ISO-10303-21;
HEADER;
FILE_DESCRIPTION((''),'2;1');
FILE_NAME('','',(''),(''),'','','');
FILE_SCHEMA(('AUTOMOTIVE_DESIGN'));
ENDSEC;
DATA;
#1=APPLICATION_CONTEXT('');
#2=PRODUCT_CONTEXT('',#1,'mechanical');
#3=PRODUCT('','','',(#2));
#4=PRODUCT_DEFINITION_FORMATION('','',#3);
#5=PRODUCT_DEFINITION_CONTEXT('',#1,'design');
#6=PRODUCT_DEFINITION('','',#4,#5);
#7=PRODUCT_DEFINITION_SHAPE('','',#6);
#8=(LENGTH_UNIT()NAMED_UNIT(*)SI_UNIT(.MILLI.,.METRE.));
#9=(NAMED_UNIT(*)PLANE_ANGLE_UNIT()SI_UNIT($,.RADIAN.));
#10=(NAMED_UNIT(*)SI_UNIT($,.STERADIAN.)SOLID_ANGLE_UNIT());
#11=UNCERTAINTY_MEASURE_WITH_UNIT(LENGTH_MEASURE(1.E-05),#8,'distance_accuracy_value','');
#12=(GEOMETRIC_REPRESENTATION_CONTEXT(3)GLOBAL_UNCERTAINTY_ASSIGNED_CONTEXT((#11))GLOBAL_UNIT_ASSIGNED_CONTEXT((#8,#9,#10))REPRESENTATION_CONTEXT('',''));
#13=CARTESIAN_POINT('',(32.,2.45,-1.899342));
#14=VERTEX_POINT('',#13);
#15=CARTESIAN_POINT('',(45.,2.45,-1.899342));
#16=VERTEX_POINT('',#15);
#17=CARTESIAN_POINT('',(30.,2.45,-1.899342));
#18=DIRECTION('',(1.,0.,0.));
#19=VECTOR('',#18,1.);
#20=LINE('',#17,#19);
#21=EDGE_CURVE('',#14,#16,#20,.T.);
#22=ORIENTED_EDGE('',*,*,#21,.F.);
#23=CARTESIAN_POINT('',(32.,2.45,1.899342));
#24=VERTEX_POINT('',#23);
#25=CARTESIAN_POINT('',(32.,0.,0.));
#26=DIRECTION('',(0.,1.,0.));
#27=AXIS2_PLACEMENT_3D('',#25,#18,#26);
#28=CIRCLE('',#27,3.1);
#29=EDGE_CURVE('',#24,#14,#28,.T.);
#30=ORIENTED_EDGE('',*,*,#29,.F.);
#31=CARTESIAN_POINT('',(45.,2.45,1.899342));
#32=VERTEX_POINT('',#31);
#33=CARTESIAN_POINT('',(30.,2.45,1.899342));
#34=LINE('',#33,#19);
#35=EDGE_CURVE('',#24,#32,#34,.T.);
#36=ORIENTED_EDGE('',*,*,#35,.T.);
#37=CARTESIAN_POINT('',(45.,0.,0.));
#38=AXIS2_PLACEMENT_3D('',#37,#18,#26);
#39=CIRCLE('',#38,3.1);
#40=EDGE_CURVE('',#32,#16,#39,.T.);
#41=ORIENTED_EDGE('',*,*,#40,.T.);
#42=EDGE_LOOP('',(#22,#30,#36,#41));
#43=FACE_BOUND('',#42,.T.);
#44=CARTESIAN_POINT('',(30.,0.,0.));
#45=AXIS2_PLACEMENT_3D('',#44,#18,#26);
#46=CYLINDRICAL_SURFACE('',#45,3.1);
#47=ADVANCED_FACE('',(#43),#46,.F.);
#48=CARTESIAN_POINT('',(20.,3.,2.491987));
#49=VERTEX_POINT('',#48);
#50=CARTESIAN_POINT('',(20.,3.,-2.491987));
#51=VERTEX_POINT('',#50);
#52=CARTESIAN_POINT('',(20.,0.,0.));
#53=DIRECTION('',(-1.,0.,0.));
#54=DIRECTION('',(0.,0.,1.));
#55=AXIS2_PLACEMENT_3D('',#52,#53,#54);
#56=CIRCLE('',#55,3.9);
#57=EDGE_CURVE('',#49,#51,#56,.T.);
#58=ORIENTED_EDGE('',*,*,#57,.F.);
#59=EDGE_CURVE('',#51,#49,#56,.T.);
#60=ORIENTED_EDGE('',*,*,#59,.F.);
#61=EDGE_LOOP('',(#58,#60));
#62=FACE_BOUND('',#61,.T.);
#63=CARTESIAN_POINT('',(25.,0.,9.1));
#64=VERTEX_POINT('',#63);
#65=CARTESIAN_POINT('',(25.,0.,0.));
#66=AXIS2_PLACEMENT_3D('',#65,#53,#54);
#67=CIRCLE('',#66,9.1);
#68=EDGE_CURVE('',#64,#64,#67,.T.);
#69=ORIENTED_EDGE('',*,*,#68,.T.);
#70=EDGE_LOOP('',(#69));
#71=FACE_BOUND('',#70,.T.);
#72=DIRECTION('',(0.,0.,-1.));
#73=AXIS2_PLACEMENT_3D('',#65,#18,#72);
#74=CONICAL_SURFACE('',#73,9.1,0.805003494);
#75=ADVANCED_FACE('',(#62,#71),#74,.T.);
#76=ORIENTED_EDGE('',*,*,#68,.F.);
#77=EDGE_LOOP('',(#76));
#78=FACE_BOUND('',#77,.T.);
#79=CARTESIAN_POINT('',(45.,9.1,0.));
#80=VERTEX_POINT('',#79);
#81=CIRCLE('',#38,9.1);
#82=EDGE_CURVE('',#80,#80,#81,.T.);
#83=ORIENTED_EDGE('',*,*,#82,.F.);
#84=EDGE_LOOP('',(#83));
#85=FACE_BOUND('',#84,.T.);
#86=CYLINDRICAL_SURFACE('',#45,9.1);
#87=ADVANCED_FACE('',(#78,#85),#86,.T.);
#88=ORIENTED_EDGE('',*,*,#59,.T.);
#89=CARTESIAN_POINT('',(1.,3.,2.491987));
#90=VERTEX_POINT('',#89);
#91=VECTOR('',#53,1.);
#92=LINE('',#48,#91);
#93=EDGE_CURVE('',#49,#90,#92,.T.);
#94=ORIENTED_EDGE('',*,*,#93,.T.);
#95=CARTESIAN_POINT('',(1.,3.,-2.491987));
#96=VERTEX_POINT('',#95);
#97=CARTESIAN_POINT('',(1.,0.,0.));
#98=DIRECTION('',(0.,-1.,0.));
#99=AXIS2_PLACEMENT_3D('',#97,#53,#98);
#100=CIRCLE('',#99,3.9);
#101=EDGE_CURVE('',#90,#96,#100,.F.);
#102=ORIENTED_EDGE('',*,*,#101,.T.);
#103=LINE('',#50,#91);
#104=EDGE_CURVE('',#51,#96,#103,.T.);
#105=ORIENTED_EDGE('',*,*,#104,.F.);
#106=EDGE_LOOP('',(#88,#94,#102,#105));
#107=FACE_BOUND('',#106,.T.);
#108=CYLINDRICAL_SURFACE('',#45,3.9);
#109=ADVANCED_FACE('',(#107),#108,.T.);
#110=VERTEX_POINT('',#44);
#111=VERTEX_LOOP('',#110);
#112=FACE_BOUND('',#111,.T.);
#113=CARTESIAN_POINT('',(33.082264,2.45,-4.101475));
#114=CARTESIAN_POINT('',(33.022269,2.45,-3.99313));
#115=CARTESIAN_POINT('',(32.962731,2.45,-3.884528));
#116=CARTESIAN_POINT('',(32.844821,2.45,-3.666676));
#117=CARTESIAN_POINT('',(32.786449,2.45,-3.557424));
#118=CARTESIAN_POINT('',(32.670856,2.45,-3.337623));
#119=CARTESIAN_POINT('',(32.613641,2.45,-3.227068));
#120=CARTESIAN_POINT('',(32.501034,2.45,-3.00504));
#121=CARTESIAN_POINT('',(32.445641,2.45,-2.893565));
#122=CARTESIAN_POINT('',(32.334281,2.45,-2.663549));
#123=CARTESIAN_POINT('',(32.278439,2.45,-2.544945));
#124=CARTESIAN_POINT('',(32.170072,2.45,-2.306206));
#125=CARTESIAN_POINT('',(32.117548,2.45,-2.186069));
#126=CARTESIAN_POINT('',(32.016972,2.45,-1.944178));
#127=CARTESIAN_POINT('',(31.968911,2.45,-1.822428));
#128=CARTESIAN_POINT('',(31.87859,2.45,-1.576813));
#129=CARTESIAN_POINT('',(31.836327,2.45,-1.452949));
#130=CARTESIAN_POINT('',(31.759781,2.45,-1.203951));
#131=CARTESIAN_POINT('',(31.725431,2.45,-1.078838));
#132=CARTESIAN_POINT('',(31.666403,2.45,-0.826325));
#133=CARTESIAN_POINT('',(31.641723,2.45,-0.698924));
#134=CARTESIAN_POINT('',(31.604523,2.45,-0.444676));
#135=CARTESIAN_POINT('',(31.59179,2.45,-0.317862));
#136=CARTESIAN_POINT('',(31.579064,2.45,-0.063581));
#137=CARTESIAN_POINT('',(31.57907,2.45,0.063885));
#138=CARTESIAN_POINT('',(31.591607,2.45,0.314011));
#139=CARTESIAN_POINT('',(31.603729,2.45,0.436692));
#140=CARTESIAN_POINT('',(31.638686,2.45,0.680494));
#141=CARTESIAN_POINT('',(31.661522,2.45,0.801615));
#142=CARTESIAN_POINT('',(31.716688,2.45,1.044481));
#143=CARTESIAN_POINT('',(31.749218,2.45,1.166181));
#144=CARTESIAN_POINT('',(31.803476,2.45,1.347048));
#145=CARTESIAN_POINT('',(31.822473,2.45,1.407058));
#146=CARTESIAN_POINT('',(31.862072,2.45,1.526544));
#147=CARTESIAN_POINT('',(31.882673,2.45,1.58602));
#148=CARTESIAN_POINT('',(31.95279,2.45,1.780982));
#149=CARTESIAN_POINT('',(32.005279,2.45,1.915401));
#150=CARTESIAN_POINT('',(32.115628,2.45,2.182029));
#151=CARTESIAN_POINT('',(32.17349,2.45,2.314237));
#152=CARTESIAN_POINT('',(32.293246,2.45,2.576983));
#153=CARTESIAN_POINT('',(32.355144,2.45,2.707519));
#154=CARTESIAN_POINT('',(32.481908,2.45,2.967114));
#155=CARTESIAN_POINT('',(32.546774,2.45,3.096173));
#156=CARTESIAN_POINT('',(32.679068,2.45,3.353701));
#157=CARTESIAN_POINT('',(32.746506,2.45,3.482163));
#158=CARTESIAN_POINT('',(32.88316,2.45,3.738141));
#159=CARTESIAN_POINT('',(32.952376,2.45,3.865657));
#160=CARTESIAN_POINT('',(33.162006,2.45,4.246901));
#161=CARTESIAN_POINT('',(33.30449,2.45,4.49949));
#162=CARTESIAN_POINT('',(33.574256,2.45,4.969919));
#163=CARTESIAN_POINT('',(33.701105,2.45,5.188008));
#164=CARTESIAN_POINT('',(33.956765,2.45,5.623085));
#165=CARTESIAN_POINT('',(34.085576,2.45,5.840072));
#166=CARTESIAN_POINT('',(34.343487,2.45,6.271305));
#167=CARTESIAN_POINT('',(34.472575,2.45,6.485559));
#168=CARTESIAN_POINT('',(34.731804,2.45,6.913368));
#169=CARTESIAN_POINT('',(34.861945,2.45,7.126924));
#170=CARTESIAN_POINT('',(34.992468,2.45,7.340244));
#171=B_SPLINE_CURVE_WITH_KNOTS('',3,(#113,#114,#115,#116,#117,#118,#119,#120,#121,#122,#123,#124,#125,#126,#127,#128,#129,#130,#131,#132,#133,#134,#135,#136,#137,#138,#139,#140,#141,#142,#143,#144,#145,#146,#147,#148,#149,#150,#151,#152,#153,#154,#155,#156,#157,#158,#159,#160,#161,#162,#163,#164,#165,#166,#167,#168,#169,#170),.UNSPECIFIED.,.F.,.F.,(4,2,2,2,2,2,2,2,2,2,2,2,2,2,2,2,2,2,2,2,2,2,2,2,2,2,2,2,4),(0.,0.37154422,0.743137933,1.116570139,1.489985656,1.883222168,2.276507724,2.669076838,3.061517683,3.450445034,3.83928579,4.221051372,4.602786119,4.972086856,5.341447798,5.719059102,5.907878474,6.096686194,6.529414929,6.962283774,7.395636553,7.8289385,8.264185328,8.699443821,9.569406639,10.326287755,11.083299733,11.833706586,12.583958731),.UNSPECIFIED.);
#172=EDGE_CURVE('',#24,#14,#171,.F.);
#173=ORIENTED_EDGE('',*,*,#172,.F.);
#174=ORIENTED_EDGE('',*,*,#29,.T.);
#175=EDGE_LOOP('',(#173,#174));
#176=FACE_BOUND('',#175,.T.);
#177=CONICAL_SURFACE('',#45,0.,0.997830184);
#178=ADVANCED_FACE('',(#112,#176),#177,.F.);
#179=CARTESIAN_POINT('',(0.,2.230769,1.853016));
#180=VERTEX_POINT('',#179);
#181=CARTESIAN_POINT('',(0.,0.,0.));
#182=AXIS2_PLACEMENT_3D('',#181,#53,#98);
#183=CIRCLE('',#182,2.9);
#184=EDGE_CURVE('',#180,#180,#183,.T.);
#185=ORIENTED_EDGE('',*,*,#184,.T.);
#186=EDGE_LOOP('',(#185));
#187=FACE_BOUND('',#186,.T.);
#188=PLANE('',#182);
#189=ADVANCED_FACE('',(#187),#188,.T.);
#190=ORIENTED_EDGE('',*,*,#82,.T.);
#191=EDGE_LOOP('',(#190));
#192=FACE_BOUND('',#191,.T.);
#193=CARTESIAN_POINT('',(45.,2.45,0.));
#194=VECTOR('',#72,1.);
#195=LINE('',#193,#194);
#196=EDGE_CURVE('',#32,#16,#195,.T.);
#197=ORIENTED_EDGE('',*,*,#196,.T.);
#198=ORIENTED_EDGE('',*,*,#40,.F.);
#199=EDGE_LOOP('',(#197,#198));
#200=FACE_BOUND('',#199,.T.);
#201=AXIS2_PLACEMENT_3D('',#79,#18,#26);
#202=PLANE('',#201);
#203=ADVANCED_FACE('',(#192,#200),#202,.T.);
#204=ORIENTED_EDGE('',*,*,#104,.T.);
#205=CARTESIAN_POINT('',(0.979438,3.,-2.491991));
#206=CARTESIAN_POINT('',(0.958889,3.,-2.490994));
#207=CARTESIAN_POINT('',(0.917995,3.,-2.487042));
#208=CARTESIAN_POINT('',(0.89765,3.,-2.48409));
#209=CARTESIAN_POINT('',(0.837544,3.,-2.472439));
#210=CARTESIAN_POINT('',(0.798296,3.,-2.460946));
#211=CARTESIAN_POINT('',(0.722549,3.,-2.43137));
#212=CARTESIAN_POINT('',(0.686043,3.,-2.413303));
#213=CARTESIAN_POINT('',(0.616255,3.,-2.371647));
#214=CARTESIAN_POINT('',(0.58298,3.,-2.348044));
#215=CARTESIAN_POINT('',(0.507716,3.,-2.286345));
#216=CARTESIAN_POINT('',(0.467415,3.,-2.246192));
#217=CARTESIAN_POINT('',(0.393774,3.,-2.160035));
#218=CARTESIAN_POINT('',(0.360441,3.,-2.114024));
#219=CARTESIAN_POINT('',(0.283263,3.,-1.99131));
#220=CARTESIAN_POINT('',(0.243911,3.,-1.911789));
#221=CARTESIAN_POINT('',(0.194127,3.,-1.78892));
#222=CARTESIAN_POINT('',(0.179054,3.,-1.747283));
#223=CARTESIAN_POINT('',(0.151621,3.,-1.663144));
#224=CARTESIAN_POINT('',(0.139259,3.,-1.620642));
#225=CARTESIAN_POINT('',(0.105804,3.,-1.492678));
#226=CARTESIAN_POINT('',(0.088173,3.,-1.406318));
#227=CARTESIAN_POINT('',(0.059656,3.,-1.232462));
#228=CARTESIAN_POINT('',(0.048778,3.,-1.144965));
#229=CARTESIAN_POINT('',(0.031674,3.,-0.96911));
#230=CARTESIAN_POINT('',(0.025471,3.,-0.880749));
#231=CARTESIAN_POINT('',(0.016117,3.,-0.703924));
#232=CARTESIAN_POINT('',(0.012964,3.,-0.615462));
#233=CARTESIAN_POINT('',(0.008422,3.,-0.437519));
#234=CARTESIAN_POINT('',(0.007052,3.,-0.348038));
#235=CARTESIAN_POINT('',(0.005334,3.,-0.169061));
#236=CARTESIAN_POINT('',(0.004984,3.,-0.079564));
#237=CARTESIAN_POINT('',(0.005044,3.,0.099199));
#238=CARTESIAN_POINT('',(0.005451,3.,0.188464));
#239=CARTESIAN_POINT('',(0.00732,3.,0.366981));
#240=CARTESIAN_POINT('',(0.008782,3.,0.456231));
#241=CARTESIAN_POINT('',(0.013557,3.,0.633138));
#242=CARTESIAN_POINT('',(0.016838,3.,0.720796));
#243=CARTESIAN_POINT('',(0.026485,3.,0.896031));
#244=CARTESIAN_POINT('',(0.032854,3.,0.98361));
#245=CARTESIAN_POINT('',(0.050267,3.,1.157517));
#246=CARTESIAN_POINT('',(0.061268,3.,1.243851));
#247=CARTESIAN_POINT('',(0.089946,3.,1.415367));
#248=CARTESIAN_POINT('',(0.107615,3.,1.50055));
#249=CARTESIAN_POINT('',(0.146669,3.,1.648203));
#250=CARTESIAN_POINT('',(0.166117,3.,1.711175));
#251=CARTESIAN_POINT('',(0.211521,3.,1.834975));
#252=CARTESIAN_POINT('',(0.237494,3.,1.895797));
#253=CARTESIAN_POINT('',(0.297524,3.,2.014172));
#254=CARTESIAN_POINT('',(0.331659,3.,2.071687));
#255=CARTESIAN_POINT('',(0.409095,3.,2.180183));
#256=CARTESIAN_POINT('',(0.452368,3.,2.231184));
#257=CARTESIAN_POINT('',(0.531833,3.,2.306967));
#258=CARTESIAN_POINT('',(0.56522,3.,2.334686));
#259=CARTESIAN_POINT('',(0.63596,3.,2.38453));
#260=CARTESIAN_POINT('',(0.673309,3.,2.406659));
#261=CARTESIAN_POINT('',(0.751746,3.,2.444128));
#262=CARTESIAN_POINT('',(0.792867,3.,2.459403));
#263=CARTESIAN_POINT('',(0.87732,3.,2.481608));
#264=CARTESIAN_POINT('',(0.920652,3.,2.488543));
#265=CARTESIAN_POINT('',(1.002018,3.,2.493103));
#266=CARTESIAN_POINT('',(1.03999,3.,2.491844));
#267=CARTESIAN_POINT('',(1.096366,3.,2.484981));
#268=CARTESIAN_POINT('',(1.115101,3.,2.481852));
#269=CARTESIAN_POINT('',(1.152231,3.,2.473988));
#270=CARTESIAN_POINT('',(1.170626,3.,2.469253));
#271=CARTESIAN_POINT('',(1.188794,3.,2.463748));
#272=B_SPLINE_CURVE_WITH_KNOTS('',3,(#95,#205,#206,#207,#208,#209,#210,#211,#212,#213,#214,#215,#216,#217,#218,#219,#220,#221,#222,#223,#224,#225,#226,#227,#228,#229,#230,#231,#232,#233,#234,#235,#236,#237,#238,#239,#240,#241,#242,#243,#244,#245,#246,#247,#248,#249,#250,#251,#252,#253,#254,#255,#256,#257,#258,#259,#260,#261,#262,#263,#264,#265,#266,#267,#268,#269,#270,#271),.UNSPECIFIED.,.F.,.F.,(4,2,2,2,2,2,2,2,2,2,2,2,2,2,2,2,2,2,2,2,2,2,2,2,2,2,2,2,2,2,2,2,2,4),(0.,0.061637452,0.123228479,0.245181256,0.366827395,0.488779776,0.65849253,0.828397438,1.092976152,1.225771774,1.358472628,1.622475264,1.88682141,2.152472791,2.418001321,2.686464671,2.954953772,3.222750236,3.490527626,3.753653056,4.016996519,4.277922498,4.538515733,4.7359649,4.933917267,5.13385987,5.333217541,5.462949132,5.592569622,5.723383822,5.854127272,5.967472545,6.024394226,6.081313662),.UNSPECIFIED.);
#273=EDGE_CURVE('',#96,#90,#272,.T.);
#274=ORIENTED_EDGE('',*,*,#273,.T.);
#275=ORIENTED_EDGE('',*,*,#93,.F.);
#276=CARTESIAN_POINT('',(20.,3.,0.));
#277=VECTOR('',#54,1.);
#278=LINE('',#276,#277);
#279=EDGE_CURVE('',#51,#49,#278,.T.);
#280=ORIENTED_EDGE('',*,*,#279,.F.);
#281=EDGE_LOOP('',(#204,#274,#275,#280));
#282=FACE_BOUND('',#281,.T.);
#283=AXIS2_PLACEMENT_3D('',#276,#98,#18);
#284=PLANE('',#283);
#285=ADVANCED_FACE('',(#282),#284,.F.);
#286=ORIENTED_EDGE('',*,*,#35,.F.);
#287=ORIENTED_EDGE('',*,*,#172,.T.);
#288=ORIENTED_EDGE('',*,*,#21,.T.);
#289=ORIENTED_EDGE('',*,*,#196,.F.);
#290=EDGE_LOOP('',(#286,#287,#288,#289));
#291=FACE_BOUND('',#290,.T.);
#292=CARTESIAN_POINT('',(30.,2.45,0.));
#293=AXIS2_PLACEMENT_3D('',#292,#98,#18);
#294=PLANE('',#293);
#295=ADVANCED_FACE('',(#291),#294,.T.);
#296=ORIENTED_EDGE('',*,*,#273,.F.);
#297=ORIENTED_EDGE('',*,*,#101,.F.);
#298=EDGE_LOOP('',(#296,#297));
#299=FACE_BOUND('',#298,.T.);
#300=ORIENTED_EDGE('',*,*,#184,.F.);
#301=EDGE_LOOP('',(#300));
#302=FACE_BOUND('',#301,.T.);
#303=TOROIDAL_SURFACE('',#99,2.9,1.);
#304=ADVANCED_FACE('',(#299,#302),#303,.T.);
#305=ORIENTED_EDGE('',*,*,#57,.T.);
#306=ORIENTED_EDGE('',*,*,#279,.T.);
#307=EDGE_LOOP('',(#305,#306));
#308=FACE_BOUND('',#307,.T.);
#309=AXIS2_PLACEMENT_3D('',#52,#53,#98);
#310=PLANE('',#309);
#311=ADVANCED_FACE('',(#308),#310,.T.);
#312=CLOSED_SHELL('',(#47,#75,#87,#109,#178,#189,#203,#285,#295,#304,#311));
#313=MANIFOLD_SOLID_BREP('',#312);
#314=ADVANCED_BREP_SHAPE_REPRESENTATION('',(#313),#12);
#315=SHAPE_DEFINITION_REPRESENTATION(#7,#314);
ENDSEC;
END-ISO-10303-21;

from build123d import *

# Parameters (mm, degrees)
BOSS_EXTRU_1_START      = -15
BOSS_EXTRU_1_DEPTH      = 15
ENL_V_START             = -20
ENL_V_MAT_EXTRU_1_DEPTH = 20


with BuildPart() as part:
    # Esquisse2 → Révolution1 (revolve)
    with BuildSketch(Plane.XY):
        Polygon((0, 0), (0, 3.9), (25, 3.9), (25, 9.1), (45, 9.1), (45, 3.1), (32, 3.1), (30, 0), align=None)
    revolve(axis=Axis((30, 0, 0), (-1, 0, 0)))

    # Esquisse3 → Révolution2 (revolve)
    with BuildSketch(Plane.XY, mode=Mode.PRIVATE) as r_volution2_sk:
        Polygon((25, 3.9), (20, 3.9), (25, 9.1), align=None)
    revolve(r_volution2_sk.sketch.rotate(Axis((0, 0, 0), (1, 0, 0)), 90), axis=Axis((0, 0, 0), (1, 0, 0)))

    # Esquisse4 → Boss.-Extru.1 (add)
    with BuildSketch(Plane(origin=(45, 0, 0), x_dir=(0, 0, -1), z_dir=(1, 0, 0)).offset(BOSS_EXTRU_1_START)):
        with BuildLine():
            ThreePointArc((1.899341991, 2.45), (0, 3.1), (-1.899341991, 2.45))
            Line((-1.899341991, 2.45), (1.899341991, 2.45))
        make_face()
    extrude(amount=BOSS_EXTRU_1_DEPTH)

    # Esquisse5 → Enlèv. mat.-Extru.1 (cut)
    with BuildSketch(Plane.ZY.offset(ENL_V_START)):
        with BuildLine():
            ThreePointArc((2.491987159, 3), (0, 3.9), (-2.491987159, 3))
            Line((-2.491987159, 3), (2.491987159, 3))
        make_face()
    extrude(amount=ENL_V_MAT_EXTRU_1_DEPTH, mode=Mode.SUBTRACT)

    # Congé2: read off the stored shape, not the designer's step
    # Congé2 outline → Congé2 (revolve, cut)
    with BuildSketch(Plane.YX):
        with BuildLine():
            Line((3.9, 0), (3.9, 1))
            ThreePointArc((3.9, 1), (3.607106781, 0.292893219), (2.9, 0))
            Line((2.9, 0), (3.9, 0))
        make_face()
    revolve(axis=Axis((0, 0, 0), (1, 0, 0)), mode=Mode.SUBTRACT)


solid = part.part
